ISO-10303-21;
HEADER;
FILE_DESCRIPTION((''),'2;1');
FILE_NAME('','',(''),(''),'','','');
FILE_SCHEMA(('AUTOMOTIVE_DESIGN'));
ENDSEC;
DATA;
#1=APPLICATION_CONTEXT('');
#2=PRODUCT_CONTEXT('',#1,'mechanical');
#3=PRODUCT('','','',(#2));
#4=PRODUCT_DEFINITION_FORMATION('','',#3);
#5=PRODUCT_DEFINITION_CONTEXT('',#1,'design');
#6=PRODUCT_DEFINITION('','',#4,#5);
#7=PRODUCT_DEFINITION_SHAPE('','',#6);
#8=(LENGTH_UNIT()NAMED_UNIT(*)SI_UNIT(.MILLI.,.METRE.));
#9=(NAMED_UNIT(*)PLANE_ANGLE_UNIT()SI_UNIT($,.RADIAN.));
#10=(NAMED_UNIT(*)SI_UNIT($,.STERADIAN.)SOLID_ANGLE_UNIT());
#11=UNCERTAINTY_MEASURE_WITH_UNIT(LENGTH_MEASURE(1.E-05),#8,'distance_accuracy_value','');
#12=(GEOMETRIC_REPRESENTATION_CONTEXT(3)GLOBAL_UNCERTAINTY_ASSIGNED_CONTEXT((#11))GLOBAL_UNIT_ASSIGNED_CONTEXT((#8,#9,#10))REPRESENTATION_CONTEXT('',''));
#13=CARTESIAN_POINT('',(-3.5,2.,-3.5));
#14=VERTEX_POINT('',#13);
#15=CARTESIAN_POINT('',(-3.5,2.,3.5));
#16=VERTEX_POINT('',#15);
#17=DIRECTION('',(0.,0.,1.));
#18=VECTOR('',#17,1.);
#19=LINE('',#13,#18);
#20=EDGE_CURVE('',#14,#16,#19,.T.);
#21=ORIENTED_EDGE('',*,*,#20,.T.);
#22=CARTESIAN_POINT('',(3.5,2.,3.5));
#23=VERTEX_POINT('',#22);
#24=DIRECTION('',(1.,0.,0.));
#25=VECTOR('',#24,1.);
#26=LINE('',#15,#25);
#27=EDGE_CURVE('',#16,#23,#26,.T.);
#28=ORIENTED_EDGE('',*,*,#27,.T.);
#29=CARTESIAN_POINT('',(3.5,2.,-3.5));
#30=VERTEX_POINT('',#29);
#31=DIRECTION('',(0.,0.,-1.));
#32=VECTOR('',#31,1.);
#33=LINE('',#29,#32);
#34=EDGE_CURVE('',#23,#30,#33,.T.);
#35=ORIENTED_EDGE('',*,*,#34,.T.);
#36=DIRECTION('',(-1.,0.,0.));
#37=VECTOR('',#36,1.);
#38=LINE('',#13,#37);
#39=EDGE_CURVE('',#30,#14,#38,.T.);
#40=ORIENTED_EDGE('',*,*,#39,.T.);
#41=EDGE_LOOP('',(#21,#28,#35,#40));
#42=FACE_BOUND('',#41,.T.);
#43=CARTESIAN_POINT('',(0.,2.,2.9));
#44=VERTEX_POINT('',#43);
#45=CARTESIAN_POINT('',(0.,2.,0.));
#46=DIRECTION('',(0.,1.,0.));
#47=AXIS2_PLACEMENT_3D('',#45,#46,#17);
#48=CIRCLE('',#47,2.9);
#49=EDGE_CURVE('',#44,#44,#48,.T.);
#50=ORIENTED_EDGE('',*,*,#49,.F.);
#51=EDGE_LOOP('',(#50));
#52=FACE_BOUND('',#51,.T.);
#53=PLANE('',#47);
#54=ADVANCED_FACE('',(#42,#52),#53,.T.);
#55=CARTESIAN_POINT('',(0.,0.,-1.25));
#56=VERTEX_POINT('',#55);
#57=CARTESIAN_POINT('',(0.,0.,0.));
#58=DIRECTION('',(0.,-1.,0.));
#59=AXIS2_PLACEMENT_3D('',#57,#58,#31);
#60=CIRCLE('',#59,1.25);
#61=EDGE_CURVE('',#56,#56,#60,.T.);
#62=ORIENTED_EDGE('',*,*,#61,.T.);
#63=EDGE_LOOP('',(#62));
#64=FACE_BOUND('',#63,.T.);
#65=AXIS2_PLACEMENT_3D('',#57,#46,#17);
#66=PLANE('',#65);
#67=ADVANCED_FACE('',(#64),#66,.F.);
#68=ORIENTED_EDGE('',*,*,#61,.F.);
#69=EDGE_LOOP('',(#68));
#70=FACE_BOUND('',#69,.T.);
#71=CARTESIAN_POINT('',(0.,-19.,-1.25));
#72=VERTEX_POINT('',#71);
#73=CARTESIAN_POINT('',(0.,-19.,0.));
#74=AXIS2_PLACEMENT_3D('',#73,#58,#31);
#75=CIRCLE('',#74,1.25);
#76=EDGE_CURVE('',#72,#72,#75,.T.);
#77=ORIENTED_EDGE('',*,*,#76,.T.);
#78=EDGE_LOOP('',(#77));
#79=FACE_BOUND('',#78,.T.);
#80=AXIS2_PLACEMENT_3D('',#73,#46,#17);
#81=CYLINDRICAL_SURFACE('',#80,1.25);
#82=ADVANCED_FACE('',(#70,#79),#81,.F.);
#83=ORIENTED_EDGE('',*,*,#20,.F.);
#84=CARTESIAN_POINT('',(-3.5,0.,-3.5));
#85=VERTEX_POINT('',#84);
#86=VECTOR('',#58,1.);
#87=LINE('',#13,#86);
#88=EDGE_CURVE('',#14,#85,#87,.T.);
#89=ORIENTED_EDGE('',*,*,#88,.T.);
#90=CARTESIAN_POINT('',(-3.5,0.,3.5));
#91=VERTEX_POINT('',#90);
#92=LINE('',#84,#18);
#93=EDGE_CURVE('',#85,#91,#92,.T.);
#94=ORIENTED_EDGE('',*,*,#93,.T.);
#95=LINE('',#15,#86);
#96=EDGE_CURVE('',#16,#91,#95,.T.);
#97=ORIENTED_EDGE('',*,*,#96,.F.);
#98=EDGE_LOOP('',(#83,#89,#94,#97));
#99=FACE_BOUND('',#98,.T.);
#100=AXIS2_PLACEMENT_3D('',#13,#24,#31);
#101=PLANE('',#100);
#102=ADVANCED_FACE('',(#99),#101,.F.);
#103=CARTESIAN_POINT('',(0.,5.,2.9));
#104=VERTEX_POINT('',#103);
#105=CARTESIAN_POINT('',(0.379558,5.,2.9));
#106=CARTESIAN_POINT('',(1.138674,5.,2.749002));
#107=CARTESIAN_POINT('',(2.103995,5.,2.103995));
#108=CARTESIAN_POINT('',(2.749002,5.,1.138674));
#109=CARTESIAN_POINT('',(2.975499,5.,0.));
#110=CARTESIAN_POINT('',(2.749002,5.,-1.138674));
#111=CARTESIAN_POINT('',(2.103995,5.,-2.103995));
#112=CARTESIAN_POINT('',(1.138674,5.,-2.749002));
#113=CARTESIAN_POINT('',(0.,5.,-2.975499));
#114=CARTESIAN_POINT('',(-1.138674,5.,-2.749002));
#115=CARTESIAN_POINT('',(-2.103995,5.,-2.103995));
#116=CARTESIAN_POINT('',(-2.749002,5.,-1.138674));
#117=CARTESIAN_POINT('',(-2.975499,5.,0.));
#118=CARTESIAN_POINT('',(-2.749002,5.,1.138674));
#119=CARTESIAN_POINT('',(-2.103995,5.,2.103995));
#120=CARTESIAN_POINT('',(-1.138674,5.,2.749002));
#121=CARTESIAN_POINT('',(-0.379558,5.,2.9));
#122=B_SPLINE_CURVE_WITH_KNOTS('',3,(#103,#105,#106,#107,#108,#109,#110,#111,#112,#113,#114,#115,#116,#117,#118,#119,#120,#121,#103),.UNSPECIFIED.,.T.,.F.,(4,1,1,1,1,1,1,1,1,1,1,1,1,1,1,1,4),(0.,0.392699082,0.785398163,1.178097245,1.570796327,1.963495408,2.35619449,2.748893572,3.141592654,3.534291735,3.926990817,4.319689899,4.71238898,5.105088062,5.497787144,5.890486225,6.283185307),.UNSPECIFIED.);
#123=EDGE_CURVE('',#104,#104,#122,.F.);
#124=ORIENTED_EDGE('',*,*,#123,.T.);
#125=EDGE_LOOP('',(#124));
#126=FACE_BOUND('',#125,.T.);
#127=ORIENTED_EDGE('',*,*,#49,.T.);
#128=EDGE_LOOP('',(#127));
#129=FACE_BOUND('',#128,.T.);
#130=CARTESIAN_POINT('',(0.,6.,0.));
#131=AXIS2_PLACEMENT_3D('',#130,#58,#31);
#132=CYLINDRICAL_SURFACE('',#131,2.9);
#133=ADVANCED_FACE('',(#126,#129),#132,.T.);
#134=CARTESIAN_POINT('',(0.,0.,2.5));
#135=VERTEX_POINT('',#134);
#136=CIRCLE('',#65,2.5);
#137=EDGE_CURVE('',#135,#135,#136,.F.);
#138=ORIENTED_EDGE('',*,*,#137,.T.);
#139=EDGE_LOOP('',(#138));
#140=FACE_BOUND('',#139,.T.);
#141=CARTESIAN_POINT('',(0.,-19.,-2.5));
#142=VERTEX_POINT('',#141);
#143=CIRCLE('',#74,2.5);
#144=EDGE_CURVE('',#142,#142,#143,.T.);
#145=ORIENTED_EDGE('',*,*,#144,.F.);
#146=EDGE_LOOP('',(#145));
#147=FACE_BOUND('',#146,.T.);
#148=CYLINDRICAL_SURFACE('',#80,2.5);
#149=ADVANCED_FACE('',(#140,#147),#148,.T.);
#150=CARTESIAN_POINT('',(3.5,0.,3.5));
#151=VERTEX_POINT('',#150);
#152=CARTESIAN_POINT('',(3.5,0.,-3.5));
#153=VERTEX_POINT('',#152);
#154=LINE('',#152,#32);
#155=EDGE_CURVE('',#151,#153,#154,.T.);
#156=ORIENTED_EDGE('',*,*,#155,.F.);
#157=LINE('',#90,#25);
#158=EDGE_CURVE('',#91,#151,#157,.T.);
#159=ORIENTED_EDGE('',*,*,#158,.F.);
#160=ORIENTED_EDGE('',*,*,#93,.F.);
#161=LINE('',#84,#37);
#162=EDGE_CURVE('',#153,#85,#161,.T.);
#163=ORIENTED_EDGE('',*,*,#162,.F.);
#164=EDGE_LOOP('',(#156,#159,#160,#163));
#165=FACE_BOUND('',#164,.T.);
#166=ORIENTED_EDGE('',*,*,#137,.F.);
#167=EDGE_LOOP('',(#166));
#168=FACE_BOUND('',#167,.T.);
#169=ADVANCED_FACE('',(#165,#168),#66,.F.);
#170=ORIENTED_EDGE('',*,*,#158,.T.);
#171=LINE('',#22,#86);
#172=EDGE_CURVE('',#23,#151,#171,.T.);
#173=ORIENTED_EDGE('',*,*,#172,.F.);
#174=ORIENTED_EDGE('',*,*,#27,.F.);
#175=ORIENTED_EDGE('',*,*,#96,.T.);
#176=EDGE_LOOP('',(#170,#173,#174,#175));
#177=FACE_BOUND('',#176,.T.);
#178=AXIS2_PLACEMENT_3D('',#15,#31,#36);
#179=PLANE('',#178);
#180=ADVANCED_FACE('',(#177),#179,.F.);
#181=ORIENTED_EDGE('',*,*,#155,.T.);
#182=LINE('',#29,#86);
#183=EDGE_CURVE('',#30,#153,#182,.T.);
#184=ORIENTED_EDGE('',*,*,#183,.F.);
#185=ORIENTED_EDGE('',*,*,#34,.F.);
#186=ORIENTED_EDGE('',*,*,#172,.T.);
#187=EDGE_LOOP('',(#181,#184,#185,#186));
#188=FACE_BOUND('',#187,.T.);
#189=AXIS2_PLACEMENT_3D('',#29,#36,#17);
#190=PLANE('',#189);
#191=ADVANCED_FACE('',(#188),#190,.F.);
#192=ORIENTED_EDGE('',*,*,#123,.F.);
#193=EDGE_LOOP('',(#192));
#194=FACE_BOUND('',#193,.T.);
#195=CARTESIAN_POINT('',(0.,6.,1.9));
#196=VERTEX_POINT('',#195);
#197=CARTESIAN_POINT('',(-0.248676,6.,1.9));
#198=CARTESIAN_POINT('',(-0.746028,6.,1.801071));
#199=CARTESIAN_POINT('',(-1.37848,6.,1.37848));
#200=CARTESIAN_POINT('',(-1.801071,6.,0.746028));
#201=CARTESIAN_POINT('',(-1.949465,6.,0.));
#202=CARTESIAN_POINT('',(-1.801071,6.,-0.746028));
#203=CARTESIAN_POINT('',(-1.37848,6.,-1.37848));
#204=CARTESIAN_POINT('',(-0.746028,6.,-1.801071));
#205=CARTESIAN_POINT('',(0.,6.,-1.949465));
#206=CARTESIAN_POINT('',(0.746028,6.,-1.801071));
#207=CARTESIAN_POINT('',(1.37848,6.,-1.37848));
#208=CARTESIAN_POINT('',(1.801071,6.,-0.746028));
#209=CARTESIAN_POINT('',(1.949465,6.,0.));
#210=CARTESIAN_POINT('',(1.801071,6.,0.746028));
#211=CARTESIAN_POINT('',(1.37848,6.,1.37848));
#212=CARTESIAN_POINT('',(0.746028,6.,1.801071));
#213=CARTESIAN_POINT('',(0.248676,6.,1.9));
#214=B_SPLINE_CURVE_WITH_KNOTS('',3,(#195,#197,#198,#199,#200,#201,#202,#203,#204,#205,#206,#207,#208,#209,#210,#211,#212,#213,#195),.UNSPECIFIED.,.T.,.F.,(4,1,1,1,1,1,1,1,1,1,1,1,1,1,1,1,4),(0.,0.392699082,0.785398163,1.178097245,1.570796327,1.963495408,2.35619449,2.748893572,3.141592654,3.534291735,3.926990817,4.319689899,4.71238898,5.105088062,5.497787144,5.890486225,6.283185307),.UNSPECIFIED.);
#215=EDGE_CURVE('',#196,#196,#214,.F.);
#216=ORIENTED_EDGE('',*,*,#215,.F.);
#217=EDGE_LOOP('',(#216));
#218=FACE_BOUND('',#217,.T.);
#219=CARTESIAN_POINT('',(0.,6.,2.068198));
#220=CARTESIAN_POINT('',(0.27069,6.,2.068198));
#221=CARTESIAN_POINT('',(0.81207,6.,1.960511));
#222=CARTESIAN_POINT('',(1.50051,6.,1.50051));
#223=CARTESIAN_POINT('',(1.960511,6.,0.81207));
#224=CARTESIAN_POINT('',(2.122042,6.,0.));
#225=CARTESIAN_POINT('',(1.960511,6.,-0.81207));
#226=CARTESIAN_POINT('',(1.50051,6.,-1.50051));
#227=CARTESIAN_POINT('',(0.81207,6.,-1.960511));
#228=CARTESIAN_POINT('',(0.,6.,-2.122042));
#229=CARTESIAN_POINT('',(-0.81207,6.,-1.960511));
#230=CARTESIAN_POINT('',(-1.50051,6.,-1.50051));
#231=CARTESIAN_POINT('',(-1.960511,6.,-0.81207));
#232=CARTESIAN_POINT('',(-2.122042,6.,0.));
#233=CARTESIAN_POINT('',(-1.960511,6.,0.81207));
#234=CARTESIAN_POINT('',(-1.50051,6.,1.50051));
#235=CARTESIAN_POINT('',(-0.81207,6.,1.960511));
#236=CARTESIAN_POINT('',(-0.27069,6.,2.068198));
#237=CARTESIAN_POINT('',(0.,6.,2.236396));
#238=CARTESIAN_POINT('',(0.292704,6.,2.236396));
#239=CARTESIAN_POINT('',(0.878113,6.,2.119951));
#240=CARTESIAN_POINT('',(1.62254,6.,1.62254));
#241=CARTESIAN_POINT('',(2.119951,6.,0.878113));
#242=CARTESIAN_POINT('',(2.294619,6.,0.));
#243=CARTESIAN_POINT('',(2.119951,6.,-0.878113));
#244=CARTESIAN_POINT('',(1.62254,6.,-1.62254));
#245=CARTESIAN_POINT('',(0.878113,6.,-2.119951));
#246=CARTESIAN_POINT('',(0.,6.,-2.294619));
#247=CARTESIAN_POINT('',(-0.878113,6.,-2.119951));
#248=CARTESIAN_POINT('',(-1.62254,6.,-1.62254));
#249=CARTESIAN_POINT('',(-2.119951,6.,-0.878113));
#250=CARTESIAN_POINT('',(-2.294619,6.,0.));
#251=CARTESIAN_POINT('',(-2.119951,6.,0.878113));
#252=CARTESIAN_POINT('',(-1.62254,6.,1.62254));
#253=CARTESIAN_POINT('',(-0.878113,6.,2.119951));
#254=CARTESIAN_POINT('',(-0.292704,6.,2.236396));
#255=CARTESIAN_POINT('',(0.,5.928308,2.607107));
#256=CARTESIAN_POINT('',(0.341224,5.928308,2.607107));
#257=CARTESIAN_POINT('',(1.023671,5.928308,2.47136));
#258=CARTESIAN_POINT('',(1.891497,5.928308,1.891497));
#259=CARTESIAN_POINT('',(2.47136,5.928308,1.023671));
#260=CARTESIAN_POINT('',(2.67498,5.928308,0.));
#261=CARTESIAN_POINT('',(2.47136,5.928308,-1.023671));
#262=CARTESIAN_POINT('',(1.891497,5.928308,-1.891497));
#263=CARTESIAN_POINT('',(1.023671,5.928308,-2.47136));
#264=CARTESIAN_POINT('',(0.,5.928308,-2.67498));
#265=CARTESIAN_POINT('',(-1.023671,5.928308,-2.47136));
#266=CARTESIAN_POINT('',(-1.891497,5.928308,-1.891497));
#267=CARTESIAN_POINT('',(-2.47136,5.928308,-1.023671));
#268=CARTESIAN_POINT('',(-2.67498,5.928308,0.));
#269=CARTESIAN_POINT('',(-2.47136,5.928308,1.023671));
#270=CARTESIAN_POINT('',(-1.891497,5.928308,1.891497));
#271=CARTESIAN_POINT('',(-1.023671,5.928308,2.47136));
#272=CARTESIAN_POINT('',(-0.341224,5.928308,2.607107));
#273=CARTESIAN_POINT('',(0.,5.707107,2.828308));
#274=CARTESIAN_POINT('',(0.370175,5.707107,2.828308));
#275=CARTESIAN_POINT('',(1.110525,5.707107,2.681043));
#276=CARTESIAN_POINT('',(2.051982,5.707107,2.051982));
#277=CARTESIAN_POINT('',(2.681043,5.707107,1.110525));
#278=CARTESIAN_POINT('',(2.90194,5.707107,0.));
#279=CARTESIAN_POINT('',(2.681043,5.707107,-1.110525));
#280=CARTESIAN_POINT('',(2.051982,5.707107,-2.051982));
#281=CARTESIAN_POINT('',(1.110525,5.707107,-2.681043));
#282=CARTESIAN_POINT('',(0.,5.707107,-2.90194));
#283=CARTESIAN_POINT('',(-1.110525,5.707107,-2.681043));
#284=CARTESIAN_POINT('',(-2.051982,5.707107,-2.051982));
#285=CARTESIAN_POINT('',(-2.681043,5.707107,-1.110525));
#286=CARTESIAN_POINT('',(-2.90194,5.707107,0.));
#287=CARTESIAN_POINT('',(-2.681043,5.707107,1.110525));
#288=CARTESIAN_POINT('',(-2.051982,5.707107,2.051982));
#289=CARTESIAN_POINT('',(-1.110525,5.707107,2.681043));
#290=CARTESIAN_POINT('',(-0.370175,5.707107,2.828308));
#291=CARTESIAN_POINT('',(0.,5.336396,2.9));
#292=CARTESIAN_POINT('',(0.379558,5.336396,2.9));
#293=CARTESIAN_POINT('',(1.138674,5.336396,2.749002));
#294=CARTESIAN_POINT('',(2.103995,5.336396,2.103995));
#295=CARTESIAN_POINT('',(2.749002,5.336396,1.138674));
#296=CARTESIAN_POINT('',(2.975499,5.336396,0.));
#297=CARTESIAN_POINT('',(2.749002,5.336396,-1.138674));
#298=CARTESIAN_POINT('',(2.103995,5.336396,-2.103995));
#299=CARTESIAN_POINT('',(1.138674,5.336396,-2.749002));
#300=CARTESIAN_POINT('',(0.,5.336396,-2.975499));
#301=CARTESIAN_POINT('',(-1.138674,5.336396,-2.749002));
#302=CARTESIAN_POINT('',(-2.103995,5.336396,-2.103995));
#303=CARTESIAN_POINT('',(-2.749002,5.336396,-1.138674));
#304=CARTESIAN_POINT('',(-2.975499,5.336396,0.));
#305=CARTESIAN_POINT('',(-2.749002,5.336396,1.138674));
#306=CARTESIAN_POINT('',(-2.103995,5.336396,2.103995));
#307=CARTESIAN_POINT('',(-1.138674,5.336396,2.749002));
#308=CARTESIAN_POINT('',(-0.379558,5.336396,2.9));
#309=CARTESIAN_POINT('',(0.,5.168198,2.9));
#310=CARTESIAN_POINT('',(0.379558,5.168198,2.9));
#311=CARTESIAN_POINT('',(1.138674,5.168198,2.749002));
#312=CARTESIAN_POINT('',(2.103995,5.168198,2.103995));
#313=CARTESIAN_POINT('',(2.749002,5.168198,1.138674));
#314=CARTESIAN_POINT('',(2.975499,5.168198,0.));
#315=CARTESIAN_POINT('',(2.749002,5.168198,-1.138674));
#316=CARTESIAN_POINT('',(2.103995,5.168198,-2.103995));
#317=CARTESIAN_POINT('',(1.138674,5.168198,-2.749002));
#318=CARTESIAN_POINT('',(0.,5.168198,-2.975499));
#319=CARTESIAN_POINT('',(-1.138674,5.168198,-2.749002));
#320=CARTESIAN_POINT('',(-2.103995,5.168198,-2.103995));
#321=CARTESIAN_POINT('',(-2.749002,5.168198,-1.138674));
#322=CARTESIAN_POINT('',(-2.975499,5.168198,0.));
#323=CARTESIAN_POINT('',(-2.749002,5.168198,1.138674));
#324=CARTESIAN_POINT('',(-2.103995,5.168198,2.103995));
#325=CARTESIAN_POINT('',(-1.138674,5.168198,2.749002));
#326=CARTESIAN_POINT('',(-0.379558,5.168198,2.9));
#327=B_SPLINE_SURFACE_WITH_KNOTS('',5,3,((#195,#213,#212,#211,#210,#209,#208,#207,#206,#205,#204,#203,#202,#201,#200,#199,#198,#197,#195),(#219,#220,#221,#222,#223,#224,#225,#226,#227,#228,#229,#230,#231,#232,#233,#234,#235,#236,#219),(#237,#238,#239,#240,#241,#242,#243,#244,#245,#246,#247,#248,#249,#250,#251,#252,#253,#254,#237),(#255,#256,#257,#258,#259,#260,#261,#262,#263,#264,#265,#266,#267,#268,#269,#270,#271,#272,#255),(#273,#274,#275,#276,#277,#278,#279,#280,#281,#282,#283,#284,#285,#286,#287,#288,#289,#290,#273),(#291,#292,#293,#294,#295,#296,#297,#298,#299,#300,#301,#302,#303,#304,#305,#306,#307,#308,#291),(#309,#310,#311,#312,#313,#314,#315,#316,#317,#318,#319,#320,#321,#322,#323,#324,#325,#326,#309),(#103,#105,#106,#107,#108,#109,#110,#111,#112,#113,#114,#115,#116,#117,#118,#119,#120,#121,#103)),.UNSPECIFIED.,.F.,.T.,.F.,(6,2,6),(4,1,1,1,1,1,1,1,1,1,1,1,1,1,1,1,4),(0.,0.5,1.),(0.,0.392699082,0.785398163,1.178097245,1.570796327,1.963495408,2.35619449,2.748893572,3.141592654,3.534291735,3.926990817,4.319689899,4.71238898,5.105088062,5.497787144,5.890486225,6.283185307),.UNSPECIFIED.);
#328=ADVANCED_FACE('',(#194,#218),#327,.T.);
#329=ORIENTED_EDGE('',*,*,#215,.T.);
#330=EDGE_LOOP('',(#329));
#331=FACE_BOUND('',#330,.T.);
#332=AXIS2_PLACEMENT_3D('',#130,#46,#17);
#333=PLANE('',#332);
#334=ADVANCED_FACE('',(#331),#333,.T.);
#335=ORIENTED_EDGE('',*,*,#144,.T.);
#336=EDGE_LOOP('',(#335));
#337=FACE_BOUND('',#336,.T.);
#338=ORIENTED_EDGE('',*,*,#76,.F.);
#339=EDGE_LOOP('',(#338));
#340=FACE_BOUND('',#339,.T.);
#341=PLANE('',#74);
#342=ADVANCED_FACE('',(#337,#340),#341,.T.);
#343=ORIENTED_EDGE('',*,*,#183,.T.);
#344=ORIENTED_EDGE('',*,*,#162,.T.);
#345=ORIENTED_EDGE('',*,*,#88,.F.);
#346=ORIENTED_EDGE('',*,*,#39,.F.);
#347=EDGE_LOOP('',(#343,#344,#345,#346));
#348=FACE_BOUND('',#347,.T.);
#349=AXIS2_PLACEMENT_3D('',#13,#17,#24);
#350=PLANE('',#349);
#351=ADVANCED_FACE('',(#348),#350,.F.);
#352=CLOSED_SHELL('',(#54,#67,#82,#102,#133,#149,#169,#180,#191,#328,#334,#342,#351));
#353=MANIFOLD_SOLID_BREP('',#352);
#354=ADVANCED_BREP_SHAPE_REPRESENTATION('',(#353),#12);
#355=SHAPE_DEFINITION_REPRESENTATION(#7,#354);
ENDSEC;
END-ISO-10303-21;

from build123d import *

# Parameters (mm, degrees)
SKETCH8_W           = 7
SKETCH8_H           = 7
BOSS_EXTRUDE3_DEPTH = 2
SKETCH9_R           = 2.9
BOSS_EXTRUDE4_DEPTH = 4
SKETCH10_R          = 2.5
SKETCH10_R_2        = 1.25
BOSS_EXTRUDE5_DEPTH = 19
FILLET1_SIZE        = 1


with BuildPart() as part:
    # Sketch8 → Boss-Extrude3 (new body)
    with BuildSketch(Plane(origin=(0, 0, 0), x_dir=(1, 0, 0), z_dir=(0, 1, 0))):
        Rectangle(SKETCH8_W, SKETCH8_H)
    extrude(amount=BOSS_EXTRUDE3_DEPTH)

    # Sketch9 → Boss-Extrude4 (add)
    with BuildSketch(Plane(origin=(0, 2, 0), x_dir=(1, 0, 0), z_dir=(0, 1, 0))):
        with Locations(Location((0, 0, 0), (0, 0, 270))):
            Circle(SKETCH9_R)
    extrude(amount=BOSS_EXTRUDE4_DEPTH)

    # Sketch10 → Boss-Extrude5 (add)
    with BuildSketch(Plane.XZ):
        with Locations(Location((0, 0, 0), (0, 0, 90))):
            Circle(SKETCH10_R)
        with Locations(Location((0, 0, 0), (0, 0, 270))):
            Circle(SKETCH10_R_2, mode=Mode.SUBTRACT)
    extrude(amount=BOSS_EXTRUDE5_DEPTH)

    # Fillet1
    # a fillet whose section is not a circle: 1 mm, written as the material it takes off along each edge
    with BuildSketch(Plane(origin=(0, 6, 0), x_dir=(0, 0, 1), z_dir=(-1, 0, 0))) as fillet1_piece_1:
        with BuildLine():
            add(Edge.make_bspline([(2.9, -FILLET1_SIZE), (2.9, -FILLET1_SIZE * 0.831801948466), (2.9, -FILLET1_SIZE * 0.663603896932), (2.9 - FILLET1_SIZE * 0.0716919198361, -FILLET1_SIZE * 0.292893218813), (2.9 - FILLET1_SIZE * 0.292893218813, -FILLET1_SIZE * 0.0716919198361), (2.9 - FILLET1_SIZE * 0.663603896932, 0), (2.9 - FILLET1_SIZE * 0.831801948466, 0), (2.9 - FILLET1_SIZE, 0)], knots=[0, 0, 0, 0, 0, 0, 0.5, 0.5, 1, 1, 1, 1, 1, 1], degree=5))
            Line((2.9 - FILLET1_SIZE, 0), (2.9, 0))
            Line((2.9, 0), (2.9, -FILLET1_SIZE))
        make_face()
    revolve(axis=Axis((0, 6, 0), (0, 1, 0)), mode=Mode.SUBTRACT)


solid = part.part
